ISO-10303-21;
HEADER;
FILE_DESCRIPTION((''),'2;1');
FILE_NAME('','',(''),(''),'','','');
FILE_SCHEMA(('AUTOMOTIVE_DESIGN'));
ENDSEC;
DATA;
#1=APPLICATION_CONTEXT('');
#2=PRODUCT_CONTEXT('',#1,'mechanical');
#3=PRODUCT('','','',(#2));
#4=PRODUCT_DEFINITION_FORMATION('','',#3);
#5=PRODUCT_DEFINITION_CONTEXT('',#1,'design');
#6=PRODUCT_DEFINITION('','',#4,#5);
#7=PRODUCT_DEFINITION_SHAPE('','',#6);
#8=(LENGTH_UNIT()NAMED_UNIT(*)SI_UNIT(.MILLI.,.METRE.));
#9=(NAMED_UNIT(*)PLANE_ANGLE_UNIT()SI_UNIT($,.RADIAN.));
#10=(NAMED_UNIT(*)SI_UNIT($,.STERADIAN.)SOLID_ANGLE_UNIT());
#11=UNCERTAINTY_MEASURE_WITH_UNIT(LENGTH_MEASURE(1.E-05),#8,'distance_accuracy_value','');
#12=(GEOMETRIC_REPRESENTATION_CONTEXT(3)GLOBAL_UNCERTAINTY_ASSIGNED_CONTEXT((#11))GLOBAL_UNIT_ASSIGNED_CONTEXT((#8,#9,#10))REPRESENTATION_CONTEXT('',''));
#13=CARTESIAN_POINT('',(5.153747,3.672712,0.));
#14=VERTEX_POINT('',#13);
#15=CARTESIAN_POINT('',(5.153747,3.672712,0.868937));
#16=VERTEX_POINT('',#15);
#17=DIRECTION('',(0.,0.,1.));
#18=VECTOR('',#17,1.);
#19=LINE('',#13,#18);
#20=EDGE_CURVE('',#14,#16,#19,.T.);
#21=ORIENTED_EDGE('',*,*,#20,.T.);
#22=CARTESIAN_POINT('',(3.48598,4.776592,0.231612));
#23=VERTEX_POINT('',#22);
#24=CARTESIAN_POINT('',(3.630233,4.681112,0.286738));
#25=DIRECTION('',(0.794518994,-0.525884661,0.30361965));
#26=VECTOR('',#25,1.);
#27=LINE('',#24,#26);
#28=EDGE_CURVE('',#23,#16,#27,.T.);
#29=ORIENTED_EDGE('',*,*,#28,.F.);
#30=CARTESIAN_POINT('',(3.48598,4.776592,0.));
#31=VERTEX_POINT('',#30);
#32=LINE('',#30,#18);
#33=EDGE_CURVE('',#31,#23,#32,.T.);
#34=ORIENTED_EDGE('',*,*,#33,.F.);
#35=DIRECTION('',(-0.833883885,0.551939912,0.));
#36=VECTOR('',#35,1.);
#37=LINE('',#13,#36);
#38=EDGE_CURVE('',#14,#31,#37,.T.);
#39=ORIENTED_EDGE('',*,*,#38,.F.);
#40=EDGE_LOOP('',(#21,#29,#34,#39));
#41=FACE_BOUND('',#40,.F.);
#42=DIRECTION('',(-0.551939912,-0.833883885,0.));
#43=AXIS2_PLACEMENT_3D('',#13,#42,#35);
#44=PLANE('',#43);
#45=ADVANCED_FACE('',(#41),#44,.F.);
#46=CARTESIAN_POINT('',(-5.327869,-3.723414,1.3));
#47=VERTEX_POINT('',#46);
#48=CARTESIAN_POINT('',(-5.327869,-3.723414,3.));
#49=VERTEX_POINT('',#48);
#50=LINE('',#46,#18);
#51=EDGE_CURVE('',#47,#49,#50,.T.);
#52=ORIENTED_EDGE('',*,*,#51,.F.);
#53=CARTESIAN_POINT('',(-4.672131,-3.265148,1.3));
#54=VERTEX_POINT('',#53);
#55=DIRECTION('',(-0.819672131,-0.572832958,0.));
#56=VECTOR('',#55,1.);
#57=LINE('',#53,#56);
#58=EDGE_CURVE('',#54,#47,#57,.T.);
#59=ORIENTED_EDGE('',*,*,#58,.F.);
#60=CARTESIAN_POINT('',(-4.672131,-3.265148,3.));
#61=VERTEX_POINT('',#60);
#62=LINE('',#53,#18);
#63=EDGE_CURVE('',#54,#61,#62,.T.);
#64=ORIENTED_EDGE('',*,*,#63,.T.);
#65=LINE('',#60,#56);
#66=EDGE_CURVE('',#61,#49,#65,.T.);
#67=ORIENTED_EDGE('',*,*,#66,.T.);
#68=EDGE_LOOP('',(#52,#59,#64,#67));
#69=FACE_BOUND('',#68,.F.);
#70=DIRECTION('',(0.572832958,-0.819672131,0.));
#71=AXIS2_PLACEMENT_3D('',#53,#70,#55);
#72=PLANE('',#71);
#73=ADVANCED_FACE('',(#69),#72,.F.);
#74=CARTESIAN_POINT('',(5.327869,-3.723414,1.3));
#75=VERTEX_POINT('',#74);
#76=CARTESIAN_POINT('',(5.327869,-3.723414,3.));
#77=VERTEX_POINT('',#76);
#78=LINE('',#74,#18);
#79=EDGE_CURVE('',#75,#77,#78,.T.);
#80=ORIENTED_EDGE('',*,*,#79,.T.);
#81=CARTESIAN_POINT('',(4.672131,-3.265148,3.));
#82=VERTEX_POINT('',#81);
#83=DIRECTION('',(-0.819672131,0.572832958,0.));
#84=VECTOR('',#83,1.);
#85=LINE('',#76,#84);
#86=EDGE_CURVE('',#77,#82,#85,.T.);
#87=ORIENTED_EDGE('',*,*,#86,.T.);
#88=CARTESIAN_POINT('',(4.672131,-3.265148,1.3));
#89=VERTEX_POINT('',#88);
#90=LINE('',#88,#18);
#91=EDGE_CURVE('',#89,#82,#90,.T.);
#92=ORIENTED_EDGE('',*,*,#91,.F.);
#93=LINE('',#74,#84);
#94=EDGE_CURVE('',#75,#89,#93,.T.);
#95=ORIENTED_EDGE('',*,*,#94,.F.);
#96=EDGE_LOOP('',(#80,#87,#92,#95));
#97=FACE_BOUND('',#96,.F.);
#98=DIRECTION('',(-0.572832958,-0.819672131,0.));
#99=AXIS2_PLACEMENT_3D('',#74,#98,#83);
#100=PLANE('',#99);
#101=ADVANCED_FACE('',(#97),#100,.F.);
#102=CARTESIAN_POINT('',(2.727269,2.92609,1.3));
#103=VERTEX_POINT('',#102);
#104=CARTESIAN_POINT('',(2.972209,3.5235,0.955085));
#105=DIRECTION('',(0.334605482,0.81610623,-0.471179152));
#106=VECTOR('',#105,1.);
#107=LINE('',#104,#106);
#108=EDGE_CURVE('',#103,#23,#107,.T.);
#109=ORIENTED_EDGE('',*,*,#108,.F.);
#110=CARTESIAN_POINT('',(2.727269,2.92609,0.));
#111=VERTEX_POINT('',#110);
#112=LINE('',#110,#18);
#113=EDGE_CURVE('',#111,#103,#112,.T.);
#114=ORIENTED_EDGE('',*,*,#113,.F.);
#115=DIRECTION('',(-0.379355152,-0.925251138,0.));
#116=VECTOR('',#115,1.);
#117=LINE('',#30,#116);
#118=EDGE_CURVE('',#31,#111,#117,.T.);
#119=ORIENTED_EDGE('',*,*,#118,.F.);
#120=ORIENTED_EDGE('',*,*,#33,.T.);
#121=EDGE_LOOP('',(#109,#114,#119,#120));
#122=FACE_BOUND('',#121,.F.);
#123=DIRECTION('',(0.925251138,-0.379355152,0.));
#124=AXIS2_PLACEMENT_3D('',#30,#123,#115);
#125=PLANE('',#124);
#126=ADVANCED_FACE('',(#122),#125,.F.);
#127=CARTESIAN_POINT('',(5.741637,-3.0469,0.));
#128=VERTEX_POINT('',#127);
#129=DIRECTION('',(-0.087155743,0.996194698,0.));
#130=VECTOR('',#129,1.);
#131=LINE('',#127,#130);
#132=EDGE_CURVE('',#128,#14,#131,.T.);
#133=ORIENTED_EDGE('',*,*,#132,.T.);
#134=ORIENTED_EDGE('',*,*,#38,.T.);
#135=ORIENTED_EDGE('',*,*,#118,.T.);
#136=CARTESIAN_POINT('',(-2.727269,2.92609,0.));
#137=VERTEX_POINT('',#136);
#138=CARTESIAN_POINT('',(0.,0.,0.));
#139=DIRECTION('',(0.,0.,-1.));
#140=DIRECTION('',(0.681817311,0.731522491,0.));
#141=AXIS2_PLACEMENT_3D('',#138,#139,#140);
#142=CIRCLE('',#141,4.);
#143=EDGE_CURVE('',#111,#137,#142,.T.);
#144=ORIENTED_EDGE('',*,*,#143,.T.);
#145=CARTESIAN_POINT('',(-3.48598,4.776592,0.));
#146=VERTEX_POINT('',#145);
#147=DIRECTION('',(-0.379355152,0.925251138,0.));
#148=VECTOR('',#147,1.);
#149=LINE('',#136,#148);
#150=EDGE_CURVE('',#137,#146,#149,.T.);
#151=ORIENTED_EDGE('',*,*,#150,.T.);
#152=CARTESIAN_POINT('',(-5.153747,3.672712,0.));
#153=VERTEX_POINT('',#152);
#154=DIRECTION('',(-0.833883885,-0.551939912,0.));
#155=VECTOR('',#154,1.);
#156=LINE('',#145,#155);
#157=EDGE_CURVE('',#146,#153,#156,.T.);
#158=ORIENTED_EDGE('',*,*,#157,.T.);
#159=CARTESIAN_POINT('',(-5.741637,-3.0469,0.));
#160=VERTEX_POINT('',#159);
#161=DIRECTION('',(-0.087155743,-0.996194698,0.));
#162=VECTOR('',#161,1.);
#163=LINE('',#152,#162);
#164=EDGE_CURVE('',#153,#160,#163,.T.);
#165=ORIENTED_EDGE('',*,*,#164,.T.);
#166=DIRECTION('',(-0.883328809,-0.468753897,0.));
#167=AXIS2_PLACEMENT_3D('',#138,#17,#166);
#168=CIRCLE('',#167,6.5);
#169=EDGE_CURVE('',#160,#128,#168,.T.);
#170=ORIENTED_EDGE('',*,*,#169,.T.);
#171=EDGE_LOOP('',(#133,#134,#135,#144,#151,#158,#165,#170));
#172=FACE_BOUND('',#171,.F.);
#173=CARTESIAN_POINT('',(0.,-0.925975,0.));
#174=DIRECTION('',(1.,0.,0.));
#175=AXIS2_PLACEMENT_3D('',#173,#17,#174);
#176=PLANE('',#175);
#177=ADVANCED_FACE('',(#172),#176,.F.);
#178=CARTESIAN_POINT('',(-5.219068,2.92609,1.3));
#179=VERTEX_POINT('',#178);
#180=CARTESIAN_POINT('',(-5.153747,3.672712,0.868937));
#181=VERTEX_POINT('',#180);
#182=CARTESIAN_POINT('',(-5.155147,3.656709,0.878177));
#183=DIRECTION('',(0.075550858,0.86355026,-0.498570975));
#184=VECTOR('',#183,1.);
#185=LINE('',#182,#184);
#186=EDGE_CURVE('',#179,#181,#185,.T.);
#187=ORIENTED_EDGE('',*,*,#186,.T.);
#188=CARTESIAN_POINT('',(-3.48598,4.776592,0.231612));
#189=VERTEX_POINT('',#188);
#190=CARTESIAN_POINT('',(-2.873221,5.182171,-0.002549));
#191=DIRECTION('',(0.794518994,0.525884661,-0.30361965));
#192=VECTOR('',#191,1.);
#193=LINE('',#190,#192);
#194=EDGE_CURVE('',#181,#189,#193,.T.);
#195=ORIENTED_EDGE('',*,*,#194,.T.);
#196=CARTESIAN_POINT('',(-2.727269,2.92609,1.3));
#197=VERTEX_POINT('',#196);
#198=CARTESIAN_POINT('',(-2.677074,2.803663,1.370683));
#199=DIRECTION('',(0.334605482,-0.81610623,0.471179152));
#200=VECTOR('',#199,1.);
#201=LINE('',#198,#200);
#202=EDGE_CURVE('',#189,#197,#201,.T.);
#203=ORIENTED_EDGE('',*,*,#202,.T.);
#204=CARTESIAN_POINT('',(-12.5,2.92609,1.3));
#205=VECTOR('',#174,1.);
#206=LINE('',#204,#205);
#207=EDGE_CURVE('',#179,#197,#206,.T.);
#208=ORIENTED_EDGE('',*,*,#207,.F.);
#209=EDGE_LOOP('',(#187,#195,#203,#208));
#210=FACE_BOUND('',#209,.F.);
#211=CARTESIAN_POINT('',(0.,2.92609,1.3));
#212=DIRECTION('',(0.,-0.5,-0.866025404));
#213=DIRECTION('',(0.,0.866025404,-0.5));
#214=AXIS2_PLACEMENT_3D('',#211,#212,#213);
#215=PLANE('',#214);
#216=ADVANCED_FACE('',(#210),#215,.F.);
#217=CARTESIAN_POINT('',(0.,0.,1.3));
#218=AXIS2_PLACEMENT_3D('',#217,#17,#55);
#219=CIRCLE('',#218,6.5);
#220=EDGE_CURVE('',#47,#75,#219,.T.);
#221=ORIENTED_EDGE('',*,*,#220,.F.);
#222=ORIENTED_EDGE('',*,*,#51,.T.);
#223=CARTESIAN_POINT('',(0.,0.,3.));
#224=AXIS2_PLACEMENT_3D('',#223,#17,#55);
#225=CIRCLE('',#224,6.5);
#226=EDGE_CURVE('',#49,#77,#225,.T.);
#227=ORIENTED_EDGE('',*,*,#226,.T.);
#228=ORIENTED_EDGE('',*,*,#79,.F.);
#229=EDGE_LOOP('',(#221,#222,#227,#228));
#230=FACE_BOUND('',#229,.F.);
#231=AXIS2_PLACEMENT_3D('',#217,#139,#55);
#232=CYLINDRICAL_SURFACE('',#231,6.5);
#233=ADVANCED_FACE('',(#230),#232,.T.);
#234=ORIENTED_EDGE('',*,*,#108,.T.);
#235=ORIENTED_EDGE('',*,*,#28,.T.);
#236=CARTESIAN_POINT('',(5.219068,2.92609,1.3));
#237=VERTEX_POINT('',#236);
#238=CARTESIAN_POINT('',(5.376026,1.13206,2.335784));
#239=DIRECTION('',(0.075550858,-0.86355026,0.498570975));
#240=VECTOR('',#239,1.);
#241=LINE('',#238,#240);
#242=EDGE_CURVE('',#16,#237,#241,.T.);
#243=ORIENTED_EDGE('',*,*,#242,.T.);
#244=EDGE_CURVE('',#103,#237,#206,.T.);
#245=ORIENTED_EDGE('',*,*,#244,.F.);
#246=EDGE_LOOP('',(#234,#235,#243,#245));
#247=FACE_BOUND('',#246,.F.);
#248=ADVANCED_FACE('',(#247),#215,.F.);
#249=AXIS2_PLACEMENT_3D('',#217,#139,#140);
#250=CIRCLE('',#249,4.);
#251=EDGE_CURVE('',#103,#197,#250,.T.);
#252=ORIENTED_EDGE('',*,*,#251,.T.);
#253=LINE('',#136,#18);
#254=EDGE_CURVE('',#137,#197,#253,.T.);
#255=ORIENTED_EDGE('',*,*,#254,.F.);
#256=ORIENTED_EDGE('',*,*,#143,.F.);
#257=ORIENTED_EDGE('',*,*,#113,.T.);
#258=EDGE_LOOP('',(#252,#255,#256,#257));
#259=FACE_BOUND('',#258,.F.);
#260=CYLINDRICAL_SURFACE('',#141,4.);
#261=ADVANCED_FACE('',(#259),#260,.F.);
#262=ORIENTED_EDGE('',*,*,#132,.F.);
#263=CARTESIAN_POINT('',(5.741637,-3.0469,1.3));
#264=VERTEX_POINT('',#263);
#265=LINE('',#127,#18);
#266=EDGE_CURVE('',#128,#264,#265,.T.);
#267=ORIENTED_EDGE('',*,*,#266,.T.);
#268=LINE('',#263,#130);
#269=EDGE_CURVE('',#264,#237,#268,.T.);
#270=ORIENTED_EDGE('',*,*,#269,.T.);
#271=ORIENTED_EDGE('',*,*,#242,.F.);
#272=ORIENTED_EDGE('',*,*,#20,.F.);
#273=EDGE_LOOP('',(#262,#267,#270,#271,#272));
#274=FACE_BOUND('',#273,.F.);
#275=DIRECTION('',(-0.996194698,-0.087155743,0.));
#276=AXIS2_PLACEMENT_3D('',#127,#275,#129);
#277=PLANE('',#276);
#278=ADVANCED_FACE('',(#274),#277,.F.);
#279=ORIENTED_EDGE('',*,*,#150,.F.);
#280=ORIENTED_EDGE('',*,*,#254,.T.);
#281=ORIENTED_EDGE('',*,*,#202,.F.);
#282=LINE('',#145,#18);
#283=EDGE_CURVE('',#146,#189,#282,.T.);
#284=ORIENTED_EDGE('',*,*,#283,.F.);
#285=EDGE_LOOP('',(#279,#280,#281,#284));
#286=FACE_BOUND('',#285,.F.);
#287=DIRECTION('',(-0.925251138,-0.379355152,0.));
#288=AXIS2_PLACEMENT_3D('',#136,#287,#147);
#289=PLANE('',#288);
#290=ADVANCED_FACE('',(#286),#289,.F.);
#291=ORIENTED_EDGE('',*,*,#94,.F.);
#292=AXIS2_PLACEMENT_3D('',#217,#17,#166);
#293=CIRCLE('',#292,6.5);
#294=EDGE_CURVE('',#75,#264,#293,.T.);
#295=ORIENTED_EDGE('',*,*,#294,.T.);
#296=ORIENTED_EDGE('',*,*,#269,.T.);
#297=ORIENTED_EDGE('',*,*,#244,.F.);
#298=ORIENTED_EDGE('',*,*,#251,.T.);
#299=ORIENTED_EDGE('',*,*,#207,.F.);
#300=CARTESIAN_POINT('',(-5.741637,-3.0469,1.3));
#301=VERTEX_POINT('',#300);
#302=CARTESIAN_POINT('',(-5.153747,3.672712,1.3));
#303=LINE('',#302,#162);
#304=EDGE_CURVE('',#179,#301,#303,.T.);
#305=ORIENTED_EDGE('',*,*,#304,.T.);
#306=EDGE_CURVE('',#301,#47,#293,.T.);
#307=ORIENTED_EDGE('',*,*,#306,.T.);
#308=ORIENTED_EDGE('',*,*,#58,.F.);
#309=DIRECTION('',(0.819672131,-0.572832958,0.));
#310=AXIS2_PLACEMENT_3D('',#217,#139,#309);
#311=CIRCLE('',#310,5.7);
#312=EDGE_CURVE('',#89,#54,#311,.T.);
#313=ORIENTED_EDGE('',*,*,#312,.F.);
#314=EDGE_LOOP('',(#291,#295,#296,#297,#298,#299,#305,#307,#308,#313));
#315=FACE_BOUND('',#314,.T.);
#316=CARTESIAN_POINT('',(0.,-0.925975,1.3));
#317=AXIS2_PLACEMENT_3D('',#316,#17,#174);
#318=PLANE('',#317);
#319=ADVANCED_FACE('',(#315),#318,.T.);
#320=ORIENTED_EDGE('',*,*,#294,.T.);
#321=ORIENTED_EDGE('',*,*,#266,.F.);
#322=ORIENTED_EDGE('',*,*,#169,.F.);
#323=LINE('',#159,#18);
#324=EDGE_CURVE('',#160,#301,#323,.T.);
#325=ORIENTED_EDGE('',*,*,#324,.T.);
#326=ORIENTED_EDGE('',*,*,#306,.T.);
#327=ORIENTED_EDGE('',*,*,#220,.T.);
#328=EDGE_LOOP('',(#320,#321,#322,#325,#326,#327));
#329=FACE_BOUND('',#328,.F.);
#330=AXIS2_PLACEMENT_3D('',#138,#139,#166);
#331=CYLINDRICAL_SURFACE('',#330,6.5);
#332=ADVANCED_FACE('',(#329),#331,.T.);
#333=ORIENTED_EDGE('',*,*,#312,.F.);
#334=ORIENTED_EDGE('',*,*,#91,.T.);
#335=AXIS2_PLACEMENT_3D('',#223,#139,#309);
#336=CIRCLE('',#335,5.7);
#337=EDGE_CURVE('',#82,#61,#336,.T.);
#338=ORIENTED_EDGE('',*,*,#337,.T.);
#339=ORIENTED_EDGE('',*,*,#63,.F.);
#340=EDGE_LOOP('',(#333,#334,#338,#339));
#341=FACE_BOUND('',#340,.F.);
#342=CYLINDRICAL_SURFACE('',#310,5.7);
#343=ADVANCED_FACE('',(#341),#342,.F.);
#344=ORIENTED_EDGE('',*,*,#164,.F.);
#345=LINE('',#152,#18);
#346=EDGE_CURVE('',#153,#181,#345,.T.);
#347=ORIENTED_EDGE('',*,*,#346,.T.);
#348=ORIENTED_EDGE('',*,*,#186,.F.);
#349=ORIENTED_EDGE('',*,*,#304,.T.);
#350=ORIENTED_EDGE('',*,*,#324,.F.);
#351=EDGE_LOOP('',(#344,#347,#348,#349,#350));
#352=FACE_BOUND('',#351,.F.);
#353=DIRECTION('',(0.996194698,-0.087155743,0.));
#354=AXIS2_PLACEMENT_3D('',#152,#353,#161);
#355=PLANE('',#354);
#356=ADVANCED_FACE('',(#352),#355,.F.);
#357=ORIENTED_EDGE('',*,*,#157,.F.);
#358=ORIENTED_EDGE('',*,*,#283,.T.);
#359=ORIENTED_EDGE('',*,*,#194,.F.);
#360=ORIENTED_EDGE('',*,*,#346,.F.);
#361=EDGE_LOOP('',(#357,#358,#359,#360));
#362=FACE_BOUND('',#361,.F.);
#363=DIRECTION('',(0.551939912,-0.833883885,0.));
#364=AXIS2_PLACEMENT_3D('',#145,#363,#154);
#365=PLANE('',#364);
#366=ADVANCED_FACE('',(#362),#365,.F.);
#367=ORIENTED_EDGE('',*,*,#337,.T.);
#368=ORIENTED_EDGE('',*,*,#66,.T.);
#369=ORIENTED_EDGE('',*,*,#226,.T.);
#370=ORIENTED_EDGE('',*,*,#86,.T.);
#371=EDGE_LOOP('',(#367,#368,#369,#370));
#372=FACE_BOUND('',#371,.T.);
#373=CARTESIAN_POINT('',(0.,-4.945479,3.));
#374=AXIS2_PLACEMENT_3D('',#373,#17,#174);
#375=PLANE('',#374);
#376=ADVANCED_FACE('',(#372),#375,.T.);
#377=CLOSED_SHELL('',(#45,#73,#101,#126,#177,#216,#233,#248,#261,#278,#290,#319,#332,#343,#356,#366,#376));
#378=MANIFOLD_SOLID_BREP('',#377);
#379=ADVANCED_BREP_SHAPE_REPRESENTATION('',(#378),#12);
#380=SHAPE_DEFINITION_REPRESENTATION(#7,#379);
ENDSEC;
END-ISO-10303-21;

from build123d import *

# Parameters (mm, degrees)
F2_DEPTH = 1.3
F4_DEPTH = 1.7
F6_DEPTH = 12.5


# Not quite as in the source:
# - a feature of the source that left no trace in its solid (it failed there, or was rolled back) is left out


with BuildPart() as f2:
    # F1 (on Top) → F2 (new body)
    with BuildSketch(Plane.XY):
        with BuildLine():
            Line((-5.1537473182, 3.6727124144), (-5.7416372565, -3.0469003289))
            ThreePointArc((-5.7416372565, -3.0469003289), (0, -6.5), (5.7416372565, -3.0469003289))
            Line((5.7416372565, -3.0469003289), (5.1537473182, 3.6727124144))
            Line((5.1537473182, 3.6727124144), (3.4859795486, 4.7765922388))
            Line((3.4859795486, 4.7765922388), (2.7272692442, 2.9260899627))
            ThreePointArc((2.7272692442, 2.9260899627), (0, -4), (-2.7272692442, 2.9260899627))
            Line((-2.7272692442, 2.9260899627), (-3.4859795486, 4.7765922388))
            Line((-3.4859795486, 4.7765922388), (-5.1537473182, 3.6727124144))
        make_face()
    extrude(amount=F2_DEPTH)

    # F3 (on face) → F4 (join)
    with BuildSketch(Plane.XY.offset(1.3)):
        with BuildLine():
            Line((-4.6721311475, -3.2651478589), (-5.3278688525, -3.723414225))
            ThreePointArc((-5.3278688525, -3.723414225), (0, -6.5), (5.3278688525, -3.723414225))
            Line((5.3278688525, -3.723414225), (4.6721311475, -3.2651478589))
            ThreePointArc((4.6721311475, -3.2651478589), (0, -5.7), (-4.6721311475, -3.2651478589))
        make_face()
    extrude(amount=F4_DEPTH)

    # F5 (on Right) → F6 (cut, symmetric)
    with BuildSketch(Plane.YZ):
        Polygon((6.7765922388, 1.3), (2.9260899627, 1.3), (6.7765922388, -0.9230885256), align=None)
    extrude(amount=F6_DEPTH, both=True, mode=Mode.SUBTRACT)


solid = f2.part
